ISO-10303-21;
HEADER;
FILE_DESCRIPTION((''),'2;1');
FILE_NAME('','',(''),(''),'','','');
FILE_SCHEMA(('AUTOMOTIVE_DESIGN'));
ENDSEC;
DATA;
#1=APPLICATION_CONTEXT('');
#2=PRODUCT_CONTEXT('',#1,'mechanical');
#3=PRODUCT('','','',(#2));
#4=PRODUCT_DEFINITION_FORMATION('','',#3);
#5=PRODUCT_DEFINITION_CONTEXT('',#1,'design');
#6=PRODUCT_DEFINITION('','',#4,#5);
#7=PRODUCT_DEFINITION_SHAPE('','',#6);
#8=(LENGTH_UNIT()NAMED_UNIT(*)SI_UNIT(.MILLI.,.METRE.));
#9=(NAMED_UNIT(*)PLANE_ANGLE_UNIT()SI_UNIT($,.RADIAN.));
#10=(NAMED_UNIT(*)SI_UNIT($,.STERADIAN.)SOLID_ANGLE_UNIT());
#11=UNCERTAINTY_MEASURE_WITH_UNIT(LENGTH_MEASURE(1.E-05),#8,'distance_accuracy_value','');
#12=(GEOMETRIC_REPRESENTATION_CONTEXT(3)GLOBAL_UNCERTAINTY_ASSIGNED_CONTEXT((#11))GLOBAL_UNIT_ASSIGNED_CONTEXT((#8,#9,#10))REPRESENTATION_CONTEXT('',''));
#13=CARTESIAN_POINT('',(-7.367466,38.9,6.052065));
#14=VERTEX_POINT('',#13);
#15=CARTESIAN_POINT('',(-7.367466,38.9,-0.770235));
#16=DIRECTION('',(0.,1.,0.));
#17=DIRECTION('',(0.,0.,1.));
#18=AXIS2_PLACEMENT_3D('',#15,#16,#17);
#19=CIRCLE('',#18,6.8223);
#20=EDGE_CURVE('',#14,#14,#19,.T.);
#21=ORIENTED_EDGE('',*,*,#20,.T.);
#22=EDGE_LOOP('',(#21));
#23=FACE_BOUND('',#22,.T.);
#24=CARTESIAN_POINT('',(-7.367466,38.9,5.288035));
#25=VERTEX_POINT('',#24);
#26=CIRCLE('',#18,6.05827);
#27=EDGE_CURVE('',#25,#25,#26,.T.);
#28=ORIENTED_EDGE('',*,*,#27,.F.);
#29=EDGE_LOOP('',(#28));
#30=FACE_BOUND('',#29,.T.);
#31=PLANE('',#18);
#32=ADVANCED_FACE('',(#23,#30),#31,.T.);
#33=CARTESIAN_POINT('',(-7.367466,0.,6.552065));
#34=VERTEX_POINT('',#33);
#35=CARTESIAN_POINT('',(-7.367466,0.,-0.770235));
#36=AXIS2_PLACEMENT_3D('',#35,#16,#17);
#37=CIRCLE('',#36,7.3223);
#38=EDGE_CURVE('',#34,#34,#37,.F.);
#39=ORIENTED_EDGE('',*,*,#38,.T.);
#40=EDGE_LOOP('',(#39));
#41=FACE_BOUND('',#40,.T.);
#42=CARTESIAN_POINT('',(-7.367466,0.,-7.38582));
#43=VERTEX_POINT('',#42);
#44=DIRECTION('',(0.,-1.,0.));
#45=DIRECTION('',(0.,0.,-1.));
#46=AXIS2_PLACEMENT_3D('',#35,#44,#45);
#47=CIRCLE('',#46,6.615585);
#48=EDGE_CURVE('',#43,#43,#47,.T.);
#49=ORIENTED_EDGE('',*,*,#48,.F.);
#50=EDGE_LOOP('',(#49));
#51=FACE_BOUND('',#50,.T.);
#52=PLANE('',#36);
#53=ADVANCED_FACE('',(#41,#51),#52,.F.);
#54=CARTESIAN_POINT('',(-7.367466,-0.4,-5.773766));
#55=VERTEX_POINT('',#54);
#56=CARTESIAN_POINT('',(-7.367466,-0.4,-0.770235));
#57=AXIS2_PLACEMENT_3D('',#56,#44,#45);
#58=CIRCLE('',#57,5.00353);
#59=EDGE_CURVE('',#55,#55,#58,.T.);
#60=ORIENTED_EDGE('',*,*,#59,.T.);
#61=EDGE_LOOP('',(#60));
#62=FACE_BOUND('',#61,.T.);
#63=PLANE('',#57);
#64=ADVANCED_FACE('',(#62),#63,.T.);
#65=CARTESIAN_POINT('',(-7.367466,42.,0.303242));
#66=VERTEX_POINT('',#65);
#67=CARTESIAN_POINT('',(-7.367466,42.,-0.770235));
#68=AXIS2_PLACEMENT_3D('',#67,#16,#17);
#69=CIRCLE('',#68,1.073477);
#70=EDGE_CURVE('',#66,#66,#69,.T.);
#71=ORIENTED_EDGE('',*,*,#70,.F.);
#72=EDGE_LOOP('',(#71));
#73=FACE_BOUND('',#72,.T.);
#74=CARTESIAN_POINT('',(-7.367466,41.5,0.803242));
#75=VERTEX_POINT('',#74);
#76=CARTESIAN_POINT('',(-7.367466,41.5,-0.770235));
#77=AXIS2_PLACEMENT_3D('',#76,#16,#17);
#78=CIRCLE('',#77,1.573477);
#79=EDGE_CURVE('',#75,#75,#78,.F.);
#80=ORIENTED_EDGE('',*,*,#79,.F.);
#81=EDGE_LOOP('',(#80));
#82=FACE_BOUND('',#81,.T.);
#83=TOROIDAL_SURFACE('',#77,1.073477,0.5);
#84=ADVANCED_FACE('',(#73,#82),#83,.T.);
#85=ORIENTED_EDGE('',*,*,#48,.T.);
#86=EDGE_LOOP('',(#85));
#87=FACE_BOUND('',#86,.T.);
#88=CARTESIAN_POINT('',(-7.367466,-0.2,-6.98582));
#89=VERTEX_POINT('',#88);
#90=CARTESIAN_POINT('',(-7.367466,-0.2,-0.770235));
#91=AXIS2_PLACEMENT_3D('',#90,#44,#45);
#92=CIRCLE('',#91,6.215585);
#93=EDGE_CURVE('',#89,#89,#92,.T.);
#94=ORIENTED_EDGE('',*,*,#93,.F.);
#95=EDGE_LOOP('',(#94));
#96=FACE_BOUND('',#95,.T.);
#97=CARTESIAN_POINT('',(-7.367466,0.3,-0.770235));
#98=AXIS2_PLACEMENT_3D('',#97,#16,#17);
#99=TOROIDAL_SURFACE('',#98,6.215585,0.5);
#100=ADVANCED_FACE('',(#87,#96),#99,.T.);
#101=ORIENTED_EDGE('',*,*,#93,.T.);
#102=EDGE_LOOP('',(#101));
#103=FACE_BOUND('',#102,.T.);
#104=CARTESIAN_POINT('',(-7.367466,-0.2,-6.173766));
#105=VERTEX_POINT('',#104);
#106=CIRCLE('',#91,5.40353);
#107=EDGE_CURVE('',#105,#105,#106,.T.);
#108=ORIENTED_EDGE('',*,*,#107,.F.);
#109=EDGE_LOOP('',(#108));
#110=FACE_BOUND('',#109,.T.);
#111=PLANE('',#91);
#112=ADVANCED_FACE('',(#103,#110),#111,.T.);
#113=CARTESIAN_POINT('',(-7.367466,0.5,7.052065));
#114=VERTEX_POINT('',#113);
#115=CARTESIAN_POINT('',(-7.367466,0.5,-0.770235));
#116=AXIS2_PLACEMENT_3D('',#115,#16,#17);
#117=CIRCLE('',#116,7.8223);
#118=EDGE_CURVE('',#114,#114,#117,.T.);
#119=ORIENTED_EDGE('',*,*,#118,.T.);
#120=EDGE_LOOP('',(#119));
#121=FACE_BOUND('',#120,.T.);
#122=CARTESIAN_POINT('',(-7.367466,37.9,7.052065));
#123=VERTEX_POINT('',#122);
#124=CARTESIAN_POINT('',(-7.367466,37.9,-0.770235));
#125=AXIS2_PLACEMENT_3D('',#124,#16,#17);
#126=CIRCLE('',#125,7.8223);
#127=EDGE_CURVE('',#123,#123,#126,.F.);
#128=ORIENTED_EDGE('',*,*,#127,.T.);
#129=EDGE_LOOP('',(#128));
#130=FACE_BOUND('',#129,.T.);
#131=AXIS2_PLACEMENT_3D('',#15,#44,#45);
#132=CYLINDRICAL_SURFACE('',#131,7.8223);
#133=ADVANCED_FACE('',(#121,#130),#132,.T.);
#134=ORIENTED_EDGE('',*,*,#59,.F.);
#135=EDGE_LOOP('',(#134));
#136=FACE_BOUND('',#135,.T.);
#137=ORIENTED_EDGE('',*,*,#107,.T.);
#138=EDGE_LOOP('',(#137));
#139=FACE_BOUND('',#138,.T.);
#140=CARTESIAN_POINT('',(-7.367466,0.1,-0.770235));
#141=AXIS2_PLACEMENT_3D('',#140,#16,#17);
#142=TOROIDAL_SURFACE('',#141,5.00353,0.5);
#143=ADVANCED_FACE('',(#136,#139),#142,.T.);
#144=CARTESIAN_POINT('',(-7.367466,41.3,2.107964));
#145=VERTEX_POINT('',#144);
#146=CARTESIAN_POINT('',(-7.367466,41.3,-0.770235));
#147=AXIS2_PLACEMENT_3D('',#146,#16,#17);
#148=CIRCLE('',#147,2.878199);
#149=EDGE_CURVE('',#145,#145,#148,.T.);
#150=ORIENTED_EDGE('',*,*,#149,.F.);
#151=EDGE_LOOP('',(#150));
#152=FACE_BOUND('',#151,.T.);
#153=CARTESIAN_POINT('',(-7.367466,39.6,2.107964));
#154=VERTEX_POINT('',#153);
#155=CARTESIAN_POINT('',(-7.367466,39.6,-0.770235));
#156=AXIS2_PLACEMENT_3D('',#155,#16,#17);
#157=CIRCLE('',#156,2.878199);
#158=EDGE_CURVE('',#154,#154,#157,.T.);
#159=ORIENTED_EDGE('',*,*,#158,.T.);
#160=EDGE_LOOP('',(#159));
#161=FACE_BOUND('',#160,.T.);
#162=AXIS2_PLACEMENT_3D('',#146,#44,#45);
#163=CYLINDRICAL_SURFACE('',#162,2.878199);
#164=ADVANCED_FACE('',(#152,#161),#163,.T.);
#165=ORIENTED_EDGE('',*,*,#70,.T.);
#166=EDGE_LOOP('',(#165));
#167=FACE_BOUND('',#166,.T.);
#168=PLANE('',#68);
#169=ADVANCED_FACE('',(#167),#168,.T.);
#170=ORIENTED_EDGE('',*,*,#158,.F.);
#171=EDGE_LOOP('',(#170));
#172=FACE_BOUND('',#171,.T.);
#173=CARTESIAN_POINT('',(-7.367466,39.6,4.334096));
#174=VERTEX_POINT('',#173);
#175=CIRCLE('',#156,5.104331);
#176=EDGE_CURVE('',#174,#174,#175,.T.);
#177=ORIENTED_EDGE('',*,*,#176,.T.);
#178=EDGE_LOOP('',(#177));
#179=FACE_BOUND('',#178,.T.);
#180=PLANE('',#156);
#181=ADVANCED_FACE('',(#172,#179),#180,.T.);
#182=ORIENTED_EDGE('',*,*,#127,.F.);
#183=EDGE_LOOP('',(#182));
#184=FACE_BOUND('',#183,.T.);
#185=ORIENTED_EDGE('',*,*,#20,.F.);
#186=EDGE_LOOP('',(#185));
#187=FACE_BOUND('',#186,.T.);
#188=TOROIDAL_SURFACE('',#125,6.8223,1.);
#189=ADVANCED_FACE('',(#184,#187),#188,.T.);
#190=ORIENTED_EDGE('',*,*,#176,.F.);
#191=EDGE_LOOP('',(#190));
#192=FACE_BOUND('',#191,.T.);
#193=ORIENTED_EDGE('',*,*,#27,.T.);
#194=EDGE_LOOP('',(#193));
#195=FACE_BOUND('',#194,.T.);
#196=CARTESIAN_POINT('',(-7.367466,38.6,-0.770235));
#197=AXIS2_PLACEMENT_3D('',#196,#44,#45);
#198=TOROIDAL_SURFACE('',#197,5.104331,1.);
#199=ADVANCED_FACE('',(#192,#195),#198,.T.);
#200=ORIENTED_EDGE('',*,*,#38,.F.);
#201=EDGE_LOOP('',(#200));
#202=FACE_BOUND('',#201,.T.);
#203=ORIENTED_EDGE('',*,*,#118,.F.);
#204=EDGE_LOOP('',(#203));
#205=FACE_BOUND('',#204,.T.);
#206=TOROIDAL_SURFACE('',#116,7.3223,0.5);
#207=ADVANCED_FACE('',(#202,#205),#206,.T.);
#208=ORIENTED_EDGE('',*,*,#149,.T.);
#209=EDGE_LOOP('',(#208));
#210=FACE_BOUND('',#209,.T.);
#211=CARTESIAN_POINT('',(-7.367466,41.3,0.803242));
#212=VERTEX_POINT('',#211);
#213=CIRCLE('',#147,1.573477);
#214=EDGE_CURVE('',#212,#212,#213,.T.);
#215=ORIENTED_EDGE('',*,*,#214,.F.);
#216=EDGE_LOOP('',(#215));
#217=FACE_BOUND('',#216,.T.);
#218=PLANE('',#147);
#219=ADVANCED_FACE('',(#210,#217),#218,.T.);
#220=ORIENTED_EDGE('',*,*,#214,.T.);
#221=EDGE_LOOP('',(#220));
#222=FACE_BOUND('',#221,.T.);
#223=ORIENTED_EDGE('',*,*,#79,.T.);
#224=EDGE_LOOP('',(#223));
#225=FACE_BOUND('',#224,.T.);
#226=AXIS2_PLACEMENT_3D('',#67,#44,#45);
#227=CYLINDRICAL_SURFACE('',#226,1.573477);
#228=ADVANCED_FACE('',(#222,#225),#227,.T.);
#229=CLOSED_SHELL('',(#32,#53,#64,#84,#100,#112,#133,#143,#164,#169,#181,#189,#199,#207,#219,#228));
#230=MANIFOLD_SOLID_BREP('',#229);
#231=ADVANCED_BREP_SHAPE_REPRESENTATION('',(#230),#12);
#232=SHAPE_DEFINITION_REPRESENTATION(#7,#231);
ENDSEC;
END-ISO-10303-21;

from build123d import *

# Parameters (mm, degrees)
SKETCH1_R            = 7.822299743
BOSS_EXTRUDE1_DEPTH  = 38.9
FILLET1_R            = 1
SKETCH7_R            = 6.058269956
BOSS_EXTRUDE7_DEPTH  = 0.7
FILLET5_R            = 1
SKETCH8_R            = 2.878199419
BOSS_EXTRUDE8_DEPTH  = 1.7
SKETCH9_R            = 1.57347679
BOSS_EXTRUDE9_DEPTH  = 0.7
FILLET7_R            = 0.5
SKETCH10_R           = 6.615584601
BOSS_EXTRUDE11_DEPTH = 0.2
FILLET8_R            = 0.5
FILLET9_R            = 0.5
SKETCH11_R           = 5.403530489
BOSS_EXTRUDE12_DEPTH = 0.2
FILLET10_R           = 0.5


with BuildPart() as part:
    # Sketch1 → Boss-Extrude1 (new body)
    with BuildSketch(Plane(origin=(0, 0, 0), x_dir=(1, 0, 0), z_dir=(0, 1, 0))):
        with Locations(Location((-7.367466469, 0.770235131, 0), (0, 0, 270))):
            Circle(SKETCH1_R)
    extrude(amount=BOSS_EXTRUDE1_DEPTH)

    # Fillet1
    fillet1_edges = [part.edges().sort_by_distance(p)[0] for p in [
        (-7.367466469, 38.9, -8.592534873),
    ]]
    fillet(fillet1_edges, radius=FILLET1_R)

    # Sketch7 → Boss-Extrude7 (add)
    with BuildSketch(Plane(origin=(0, 38.9, 0), x_dir=(1, 0, 0), z_dir=(0, 1, 0))):
        with Locations(Location((-7.367466469, 0.770235131, 0), (0, 0, 270))):
            Circle(SKETCH7_R)
    extrude(amount=BOSS_EXTRUDE7_DEPTH)

    # Fillet5
    # the kernel refuses this fillet: 1 mm, written as the material it takes off along each edge
    with BuildSketch(Plane(origin=(-7.367466469, 39.6, -0.770235131), x_dir=(0, 0, 1), z_dir=(-1, 0, 0))) as fillet5_piece_1:
        with BuildLine():
            CenterArc((5.104330755, -1), FILLET5_R, 17.457603124, 72.542396876)
            Line((5.104330755, 0), (5.104330755, 0.02))
            Line((5.104330755, 0.02), (6.058269956, 0.02))
            Line((6.058269956, 0.02), (6.078269956, 0))
            ThreePointArc((6.078269956, 0), (6.078269956, -0.35), (6.07734874, -0.694))
            Line((6.07734874, -0.694), (6.058269956, -0.7))
        make_face()
    revolve(axis=Axis((-7.367466469, 39.6, -0.770235131), (0, 1, 0)), mode=Mode.SUBTRACT)

    # Sketch8 → Boss-Extrude8 (add)
    with BuildSketch(Plane(origin=(0, 39.6, 0), x_dir=(1, 0, 0), z_dir=(0, 1, 0))):
        with Locations(Location((-7.367466469, 0.770235131, 0), (0, 0, 270))):
            Circle(SKETCH8_R)
    extrude(amount=BOSS_EXTRUDE8_DEPTH)

    # Sketch9 → Boss-Extrude9 (add)
    with BuildSketch(Plane(origin=(0, 41.3, 0), x_dir=(1, 0, 0), z_dir=(0, 1, 0))):
        with Locations(Location((-7.367466469, 0.770235131, 0), (0, 0, 270))):
            Circle(SKETCH9_R)
    extrude(amount=BOSS_EXTRUDE9_DEPTH)

    # Fillet7
    fillet7_edges = [part.edges().sort_by_distance(p)[0] for p in [
        (-7.367466469, 42, -2.343711921),
    ]]
    fillet(fillet7_edges, radius=FILLET7_R)

    # Sketch10 → Boss-Extrude11 (add)
    with BuildSketch(Plane.XZ):
        with Locations(Location((-7.367466469, -0.770235131, 0), (0, 0, 270))):
            Circle(SKETCH10_R)
    extrude(amount=BOSS_EXTRUDE11_DEPTH)

    # Fillet8
    fillet8_edges = [part.edges().sort_by_distance(p)[0] for p in [
        (-7.367466469, 0, -8.592534873),
    ]]
    fillet(fillet8_edges, radius=FILLET8_R)

    # Fillet9
    # the kernel refuses this fillet: 0.5 mm, written as the material it takes off along each edge
    with BuildSketch(Plane(origin=(-7.367466469, -0.2, -0.770235131), x_dir=(0, 0, -1), z_dir=(-1, 0, 0))) as fillet9_piece_1:
        with BuildLine():
            CenterArc((6.215584601, -0.5), FILLET9_R, 36.869897645, 53.130102355)
            Line((6.215584601, 0), (6.215584601, 0.01))
            Line((6.215584601, 0.01), (6.615584601, 0.01))
            Line((6.615584601, 0.01), (6.625584601, 0))
            ThreePointArc((6.625584601, 0), (6.625584601, -0.1), (6.623584601, -0.194))
            Line((6.623584601, -0.194), (6.615584601, -0.2))
        make_face()
    revolve(axis=Axis((-7.367466469, -0.2, -0.770235131), (0, -1, 0)), mode=Mode.SUBTRACT)

    # Sketch11 → Boss-Extrude12 (add)
    with BuildSketch(Plane.XZ.offset(0.2)):
        with Locations(Location((-7.367466469, -0.770235131, 0), (0, 0, 270))):
            Circle(SKETCH11_R)
    extrude(amount=BOSS_EXTRUDE12_DEPTH)

    # Fillet10
    # the kernel refuses this fillet: 0.5 mm, written as the material it takes off along each edge
    with BuildSketch(Plane(origin=(-7.367466469, -0.4, -0.770235131), x_dir=(0, 0, -1), z_dir=(-1, 0, 0))) as fillet10_piece_1:
        with BuildLine():
            CenterArc((5.003530489, -0.5), FILLET10_R, 36.869897645, 53.130102355)
            Line((5.003530489, 0), (5.003530489, 0.01))
            Line((5.003530489, 0.01), (5.403530489, 0.01))
            Line((5.403530489, 0.01), (5.413530489, 0))
            ThreePointArc((5.413530489, 0), (5.413530489, -0.1), (5.411530489, -0.194))
            Line((5.411530489, -0.194), (5.403530489, -0.2))
        make_face()
    revolve(axis=Axis((-7.367466469, -0.4, -0.770235131), (0, -1, 0)), mode=Mode.SUBTRACT)


solid = part.part
